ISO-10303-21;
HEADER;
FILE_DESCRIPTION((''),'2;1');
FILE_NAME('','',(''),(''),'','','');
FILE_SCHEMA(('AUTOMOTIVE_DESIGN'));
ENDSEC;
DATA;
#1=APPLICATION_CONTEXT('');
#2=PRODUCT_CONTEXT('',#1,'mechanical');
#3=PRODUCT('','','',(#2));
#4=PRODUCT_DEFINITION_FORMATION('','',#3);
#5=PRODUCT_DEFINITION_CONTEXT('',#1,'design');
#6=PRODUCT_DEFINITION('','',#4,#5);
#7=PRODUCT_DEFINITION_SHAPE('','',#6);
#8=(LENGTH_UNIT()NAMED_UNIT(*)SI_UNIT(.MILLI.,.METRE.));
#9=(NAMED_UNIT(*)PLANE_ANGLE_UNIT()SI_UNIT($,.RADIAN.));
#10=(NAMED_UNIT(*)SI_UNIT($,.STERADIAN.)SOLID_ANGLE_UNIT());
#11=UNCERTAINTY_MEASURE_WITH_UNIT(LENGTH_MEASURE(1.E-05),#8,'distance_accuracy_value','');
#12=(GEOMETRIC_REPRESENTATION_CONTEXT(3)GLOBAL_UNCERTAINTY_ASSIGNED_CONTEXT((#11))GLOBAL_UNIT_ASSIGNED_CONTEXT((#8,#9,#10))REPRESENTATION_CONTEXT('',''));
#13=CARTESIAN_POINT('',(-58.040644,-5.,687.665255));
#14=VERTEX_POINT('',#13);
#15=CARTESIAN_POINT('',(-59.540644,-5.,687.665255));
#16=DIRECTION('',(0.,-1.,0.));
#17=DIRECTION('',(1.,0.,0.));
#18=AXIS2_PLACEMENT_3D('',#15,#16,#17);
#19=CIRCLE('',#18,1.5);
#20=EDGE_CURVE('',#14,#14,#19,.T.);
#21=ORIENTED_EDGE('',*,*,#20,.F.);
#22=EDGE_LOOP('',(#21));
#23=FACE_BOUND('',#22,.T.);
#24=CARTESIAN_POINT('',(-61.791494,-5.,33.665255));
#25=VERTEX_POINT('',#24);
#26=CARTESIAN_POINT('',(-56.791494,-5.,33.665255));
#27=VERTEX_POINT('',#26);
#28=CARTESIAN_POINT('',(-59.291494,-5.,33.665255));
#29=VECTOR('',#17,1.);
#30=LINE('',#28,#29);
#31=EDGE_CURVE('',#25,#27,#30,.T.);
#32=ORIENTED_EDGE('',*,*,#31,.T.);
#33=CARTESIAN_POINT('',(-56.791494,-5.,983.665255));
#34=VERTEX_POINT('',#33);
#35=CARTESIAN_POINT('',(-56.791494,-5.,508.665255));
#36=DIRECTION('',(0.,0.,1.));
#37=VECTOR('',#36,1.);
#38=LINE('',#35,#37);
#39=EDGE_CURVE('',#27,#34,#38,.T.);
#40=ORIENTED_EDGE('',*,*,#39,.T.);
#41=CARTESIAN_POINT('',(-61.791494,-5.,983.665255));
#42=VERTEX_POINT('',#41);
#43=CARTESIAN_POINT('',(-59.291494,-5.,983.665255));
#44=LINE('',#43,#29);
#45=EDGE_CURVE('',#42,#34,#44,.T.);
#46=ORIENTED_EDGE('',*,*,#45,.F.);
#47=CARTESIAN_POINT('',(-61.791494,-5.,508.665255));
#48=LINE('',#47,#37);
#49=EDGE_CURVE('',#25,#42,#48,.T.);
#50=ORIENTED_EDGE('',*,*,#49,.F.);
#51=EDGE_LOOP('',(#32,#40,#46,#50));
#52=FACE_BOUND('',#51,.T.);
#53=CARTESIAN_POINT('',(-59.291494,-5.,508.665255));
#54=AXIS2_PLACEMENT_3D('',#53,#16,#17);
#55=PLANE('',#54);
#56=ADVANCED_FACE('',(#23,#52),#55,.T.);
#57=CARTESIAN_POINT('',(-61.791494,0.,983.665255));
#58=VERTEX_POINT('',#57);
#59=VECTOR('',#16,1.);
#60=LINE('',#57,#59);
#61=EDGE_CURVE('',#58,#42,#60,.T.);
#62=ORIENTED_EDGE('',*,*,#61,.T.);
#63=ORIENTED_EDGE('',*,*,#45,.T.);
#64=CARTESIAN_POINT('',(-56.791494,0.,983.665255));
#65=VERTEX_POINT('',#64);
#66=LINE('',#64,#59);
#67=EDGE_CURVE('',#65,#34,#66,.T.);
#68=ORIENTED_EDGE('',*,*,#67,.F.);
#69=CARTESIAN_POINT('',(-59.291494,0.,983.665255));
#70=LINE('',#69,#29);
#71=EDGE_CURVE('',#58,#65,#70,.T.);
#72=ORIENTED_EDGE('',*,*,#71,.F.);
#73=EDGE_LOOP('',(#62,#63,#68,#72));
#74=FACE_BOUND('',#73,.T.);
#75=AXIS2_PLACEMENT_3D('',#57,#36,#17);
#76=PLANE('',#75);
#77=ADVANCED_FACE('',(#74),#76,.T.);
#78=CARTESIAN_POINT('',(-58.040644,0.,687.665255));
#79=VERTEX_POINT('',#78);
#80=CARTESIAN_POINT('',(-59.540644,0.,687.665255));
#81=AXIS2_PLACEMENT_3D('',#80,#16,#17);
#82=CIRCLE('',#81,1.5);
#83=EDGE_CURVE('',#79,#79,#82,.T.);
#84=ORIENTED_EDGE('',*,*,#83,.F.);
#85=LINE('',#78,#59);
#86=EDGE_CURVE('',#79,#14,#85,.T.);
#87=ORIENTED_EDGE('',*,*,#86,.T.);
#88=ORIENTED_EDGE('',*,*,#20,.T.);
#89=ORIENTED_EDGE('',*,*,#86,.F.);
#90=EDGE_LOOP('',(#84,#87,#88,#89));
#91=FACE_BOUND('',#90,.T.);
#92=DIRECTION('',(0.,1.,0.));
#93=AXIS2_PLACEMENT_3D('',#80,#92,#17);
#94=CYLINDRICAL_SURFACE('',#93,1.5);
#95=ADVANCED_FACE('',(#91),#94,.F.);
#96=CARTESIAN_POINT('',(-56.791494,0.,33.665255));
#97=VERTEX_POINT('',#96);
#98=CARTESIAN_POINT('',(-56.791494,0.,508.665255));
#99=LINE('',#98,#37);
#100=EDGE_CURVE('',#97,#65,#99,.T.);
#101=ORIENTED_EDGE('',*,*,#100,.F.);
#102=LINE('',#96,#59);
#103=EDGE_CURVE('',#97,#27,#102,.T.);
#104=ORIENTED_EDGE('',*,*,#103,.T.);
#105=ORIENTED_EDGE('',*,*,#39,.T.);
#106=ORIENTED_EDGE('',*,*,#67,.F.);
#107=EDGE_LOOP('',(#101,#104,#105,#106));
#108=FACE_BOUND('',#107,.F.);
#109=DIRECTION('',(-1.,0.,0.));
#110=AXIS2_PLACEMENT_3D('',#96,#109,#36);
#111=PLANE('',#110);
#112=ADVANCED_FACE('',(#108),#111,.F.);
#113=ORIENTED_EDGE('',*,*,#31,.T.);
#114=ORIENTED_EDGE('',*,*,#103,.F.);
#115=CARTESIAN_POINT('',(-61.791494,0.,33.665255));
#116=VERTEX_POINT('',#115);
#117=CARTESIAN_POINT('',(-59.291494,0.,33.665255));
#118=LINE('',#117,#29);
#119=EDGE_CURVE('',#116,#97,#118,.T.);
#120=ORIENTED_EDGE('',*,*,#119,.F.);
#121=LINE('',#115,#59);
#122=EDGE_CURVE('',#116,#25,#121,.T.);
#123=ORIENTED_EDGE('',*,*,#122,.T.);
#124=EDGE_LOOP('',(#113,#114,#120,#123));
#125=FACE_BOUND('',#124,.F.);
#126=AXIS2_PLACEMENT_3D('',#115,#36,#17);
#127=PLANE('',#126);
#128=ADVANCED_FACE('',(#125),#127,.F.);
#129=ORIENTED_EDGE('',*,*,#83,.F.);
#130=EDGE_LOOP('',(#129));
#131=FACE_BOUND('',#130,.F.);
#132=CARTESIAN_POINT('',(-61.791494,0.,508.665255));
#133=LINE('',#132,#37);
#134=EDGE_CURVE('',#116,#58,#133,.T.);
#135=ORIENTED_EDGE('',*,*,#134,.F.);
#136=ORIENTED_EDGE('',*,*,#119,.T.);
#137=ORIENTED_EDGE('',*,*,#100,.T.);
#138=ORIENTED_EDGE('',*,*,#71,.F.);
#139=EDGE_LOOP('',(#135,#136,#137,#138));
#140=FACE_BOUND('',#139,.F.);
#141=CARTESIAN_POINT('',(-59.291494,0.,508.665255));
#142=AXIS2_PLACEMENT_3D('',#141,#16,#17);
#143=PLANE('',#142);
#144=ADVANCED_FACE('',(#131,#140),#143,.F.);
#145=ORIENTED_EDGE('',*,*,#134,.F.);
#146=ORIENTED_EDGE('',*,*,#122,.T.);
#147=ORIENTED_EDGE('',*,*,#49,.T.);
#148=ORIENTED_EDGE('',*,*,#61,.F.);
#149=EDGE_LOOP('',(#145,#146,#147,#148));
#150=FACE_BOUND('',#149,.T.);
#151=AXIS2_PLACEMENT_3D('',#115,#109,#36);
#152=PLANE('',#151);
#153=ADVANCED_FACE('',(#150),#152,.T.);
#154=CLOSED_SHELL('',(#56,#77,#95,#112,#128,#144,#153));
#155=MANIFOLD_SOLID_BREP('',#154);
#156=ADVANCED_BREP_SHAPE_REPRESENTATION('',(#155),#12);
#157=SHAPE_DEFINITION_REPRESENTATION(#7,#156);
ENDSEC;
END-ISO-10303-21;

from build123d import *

# Parameters (mm, degrees)
F0_W     = 5
F0_H     = 950
F0_R     = 1.5
F1_DEPTH = 5


# Not quite as in the source:
# - a feature names something its author has since deleted; it is built from what else it names


with BuildPart() as f1:
    # F0 (on Front) → F1 (new body)
    with BuildSketch(Plane.XZ):
        with Locations((-59.2914944887, 508.6652547121)):
            Rectangle(F0_W, F0_H)
        with Locations((-59.5406442881, 687.6652547121)):
            Circle(F0_R, mode=Mode.SUBTRACT)
    extrude(amount=F1_DEPTH)


solid = f1.part
